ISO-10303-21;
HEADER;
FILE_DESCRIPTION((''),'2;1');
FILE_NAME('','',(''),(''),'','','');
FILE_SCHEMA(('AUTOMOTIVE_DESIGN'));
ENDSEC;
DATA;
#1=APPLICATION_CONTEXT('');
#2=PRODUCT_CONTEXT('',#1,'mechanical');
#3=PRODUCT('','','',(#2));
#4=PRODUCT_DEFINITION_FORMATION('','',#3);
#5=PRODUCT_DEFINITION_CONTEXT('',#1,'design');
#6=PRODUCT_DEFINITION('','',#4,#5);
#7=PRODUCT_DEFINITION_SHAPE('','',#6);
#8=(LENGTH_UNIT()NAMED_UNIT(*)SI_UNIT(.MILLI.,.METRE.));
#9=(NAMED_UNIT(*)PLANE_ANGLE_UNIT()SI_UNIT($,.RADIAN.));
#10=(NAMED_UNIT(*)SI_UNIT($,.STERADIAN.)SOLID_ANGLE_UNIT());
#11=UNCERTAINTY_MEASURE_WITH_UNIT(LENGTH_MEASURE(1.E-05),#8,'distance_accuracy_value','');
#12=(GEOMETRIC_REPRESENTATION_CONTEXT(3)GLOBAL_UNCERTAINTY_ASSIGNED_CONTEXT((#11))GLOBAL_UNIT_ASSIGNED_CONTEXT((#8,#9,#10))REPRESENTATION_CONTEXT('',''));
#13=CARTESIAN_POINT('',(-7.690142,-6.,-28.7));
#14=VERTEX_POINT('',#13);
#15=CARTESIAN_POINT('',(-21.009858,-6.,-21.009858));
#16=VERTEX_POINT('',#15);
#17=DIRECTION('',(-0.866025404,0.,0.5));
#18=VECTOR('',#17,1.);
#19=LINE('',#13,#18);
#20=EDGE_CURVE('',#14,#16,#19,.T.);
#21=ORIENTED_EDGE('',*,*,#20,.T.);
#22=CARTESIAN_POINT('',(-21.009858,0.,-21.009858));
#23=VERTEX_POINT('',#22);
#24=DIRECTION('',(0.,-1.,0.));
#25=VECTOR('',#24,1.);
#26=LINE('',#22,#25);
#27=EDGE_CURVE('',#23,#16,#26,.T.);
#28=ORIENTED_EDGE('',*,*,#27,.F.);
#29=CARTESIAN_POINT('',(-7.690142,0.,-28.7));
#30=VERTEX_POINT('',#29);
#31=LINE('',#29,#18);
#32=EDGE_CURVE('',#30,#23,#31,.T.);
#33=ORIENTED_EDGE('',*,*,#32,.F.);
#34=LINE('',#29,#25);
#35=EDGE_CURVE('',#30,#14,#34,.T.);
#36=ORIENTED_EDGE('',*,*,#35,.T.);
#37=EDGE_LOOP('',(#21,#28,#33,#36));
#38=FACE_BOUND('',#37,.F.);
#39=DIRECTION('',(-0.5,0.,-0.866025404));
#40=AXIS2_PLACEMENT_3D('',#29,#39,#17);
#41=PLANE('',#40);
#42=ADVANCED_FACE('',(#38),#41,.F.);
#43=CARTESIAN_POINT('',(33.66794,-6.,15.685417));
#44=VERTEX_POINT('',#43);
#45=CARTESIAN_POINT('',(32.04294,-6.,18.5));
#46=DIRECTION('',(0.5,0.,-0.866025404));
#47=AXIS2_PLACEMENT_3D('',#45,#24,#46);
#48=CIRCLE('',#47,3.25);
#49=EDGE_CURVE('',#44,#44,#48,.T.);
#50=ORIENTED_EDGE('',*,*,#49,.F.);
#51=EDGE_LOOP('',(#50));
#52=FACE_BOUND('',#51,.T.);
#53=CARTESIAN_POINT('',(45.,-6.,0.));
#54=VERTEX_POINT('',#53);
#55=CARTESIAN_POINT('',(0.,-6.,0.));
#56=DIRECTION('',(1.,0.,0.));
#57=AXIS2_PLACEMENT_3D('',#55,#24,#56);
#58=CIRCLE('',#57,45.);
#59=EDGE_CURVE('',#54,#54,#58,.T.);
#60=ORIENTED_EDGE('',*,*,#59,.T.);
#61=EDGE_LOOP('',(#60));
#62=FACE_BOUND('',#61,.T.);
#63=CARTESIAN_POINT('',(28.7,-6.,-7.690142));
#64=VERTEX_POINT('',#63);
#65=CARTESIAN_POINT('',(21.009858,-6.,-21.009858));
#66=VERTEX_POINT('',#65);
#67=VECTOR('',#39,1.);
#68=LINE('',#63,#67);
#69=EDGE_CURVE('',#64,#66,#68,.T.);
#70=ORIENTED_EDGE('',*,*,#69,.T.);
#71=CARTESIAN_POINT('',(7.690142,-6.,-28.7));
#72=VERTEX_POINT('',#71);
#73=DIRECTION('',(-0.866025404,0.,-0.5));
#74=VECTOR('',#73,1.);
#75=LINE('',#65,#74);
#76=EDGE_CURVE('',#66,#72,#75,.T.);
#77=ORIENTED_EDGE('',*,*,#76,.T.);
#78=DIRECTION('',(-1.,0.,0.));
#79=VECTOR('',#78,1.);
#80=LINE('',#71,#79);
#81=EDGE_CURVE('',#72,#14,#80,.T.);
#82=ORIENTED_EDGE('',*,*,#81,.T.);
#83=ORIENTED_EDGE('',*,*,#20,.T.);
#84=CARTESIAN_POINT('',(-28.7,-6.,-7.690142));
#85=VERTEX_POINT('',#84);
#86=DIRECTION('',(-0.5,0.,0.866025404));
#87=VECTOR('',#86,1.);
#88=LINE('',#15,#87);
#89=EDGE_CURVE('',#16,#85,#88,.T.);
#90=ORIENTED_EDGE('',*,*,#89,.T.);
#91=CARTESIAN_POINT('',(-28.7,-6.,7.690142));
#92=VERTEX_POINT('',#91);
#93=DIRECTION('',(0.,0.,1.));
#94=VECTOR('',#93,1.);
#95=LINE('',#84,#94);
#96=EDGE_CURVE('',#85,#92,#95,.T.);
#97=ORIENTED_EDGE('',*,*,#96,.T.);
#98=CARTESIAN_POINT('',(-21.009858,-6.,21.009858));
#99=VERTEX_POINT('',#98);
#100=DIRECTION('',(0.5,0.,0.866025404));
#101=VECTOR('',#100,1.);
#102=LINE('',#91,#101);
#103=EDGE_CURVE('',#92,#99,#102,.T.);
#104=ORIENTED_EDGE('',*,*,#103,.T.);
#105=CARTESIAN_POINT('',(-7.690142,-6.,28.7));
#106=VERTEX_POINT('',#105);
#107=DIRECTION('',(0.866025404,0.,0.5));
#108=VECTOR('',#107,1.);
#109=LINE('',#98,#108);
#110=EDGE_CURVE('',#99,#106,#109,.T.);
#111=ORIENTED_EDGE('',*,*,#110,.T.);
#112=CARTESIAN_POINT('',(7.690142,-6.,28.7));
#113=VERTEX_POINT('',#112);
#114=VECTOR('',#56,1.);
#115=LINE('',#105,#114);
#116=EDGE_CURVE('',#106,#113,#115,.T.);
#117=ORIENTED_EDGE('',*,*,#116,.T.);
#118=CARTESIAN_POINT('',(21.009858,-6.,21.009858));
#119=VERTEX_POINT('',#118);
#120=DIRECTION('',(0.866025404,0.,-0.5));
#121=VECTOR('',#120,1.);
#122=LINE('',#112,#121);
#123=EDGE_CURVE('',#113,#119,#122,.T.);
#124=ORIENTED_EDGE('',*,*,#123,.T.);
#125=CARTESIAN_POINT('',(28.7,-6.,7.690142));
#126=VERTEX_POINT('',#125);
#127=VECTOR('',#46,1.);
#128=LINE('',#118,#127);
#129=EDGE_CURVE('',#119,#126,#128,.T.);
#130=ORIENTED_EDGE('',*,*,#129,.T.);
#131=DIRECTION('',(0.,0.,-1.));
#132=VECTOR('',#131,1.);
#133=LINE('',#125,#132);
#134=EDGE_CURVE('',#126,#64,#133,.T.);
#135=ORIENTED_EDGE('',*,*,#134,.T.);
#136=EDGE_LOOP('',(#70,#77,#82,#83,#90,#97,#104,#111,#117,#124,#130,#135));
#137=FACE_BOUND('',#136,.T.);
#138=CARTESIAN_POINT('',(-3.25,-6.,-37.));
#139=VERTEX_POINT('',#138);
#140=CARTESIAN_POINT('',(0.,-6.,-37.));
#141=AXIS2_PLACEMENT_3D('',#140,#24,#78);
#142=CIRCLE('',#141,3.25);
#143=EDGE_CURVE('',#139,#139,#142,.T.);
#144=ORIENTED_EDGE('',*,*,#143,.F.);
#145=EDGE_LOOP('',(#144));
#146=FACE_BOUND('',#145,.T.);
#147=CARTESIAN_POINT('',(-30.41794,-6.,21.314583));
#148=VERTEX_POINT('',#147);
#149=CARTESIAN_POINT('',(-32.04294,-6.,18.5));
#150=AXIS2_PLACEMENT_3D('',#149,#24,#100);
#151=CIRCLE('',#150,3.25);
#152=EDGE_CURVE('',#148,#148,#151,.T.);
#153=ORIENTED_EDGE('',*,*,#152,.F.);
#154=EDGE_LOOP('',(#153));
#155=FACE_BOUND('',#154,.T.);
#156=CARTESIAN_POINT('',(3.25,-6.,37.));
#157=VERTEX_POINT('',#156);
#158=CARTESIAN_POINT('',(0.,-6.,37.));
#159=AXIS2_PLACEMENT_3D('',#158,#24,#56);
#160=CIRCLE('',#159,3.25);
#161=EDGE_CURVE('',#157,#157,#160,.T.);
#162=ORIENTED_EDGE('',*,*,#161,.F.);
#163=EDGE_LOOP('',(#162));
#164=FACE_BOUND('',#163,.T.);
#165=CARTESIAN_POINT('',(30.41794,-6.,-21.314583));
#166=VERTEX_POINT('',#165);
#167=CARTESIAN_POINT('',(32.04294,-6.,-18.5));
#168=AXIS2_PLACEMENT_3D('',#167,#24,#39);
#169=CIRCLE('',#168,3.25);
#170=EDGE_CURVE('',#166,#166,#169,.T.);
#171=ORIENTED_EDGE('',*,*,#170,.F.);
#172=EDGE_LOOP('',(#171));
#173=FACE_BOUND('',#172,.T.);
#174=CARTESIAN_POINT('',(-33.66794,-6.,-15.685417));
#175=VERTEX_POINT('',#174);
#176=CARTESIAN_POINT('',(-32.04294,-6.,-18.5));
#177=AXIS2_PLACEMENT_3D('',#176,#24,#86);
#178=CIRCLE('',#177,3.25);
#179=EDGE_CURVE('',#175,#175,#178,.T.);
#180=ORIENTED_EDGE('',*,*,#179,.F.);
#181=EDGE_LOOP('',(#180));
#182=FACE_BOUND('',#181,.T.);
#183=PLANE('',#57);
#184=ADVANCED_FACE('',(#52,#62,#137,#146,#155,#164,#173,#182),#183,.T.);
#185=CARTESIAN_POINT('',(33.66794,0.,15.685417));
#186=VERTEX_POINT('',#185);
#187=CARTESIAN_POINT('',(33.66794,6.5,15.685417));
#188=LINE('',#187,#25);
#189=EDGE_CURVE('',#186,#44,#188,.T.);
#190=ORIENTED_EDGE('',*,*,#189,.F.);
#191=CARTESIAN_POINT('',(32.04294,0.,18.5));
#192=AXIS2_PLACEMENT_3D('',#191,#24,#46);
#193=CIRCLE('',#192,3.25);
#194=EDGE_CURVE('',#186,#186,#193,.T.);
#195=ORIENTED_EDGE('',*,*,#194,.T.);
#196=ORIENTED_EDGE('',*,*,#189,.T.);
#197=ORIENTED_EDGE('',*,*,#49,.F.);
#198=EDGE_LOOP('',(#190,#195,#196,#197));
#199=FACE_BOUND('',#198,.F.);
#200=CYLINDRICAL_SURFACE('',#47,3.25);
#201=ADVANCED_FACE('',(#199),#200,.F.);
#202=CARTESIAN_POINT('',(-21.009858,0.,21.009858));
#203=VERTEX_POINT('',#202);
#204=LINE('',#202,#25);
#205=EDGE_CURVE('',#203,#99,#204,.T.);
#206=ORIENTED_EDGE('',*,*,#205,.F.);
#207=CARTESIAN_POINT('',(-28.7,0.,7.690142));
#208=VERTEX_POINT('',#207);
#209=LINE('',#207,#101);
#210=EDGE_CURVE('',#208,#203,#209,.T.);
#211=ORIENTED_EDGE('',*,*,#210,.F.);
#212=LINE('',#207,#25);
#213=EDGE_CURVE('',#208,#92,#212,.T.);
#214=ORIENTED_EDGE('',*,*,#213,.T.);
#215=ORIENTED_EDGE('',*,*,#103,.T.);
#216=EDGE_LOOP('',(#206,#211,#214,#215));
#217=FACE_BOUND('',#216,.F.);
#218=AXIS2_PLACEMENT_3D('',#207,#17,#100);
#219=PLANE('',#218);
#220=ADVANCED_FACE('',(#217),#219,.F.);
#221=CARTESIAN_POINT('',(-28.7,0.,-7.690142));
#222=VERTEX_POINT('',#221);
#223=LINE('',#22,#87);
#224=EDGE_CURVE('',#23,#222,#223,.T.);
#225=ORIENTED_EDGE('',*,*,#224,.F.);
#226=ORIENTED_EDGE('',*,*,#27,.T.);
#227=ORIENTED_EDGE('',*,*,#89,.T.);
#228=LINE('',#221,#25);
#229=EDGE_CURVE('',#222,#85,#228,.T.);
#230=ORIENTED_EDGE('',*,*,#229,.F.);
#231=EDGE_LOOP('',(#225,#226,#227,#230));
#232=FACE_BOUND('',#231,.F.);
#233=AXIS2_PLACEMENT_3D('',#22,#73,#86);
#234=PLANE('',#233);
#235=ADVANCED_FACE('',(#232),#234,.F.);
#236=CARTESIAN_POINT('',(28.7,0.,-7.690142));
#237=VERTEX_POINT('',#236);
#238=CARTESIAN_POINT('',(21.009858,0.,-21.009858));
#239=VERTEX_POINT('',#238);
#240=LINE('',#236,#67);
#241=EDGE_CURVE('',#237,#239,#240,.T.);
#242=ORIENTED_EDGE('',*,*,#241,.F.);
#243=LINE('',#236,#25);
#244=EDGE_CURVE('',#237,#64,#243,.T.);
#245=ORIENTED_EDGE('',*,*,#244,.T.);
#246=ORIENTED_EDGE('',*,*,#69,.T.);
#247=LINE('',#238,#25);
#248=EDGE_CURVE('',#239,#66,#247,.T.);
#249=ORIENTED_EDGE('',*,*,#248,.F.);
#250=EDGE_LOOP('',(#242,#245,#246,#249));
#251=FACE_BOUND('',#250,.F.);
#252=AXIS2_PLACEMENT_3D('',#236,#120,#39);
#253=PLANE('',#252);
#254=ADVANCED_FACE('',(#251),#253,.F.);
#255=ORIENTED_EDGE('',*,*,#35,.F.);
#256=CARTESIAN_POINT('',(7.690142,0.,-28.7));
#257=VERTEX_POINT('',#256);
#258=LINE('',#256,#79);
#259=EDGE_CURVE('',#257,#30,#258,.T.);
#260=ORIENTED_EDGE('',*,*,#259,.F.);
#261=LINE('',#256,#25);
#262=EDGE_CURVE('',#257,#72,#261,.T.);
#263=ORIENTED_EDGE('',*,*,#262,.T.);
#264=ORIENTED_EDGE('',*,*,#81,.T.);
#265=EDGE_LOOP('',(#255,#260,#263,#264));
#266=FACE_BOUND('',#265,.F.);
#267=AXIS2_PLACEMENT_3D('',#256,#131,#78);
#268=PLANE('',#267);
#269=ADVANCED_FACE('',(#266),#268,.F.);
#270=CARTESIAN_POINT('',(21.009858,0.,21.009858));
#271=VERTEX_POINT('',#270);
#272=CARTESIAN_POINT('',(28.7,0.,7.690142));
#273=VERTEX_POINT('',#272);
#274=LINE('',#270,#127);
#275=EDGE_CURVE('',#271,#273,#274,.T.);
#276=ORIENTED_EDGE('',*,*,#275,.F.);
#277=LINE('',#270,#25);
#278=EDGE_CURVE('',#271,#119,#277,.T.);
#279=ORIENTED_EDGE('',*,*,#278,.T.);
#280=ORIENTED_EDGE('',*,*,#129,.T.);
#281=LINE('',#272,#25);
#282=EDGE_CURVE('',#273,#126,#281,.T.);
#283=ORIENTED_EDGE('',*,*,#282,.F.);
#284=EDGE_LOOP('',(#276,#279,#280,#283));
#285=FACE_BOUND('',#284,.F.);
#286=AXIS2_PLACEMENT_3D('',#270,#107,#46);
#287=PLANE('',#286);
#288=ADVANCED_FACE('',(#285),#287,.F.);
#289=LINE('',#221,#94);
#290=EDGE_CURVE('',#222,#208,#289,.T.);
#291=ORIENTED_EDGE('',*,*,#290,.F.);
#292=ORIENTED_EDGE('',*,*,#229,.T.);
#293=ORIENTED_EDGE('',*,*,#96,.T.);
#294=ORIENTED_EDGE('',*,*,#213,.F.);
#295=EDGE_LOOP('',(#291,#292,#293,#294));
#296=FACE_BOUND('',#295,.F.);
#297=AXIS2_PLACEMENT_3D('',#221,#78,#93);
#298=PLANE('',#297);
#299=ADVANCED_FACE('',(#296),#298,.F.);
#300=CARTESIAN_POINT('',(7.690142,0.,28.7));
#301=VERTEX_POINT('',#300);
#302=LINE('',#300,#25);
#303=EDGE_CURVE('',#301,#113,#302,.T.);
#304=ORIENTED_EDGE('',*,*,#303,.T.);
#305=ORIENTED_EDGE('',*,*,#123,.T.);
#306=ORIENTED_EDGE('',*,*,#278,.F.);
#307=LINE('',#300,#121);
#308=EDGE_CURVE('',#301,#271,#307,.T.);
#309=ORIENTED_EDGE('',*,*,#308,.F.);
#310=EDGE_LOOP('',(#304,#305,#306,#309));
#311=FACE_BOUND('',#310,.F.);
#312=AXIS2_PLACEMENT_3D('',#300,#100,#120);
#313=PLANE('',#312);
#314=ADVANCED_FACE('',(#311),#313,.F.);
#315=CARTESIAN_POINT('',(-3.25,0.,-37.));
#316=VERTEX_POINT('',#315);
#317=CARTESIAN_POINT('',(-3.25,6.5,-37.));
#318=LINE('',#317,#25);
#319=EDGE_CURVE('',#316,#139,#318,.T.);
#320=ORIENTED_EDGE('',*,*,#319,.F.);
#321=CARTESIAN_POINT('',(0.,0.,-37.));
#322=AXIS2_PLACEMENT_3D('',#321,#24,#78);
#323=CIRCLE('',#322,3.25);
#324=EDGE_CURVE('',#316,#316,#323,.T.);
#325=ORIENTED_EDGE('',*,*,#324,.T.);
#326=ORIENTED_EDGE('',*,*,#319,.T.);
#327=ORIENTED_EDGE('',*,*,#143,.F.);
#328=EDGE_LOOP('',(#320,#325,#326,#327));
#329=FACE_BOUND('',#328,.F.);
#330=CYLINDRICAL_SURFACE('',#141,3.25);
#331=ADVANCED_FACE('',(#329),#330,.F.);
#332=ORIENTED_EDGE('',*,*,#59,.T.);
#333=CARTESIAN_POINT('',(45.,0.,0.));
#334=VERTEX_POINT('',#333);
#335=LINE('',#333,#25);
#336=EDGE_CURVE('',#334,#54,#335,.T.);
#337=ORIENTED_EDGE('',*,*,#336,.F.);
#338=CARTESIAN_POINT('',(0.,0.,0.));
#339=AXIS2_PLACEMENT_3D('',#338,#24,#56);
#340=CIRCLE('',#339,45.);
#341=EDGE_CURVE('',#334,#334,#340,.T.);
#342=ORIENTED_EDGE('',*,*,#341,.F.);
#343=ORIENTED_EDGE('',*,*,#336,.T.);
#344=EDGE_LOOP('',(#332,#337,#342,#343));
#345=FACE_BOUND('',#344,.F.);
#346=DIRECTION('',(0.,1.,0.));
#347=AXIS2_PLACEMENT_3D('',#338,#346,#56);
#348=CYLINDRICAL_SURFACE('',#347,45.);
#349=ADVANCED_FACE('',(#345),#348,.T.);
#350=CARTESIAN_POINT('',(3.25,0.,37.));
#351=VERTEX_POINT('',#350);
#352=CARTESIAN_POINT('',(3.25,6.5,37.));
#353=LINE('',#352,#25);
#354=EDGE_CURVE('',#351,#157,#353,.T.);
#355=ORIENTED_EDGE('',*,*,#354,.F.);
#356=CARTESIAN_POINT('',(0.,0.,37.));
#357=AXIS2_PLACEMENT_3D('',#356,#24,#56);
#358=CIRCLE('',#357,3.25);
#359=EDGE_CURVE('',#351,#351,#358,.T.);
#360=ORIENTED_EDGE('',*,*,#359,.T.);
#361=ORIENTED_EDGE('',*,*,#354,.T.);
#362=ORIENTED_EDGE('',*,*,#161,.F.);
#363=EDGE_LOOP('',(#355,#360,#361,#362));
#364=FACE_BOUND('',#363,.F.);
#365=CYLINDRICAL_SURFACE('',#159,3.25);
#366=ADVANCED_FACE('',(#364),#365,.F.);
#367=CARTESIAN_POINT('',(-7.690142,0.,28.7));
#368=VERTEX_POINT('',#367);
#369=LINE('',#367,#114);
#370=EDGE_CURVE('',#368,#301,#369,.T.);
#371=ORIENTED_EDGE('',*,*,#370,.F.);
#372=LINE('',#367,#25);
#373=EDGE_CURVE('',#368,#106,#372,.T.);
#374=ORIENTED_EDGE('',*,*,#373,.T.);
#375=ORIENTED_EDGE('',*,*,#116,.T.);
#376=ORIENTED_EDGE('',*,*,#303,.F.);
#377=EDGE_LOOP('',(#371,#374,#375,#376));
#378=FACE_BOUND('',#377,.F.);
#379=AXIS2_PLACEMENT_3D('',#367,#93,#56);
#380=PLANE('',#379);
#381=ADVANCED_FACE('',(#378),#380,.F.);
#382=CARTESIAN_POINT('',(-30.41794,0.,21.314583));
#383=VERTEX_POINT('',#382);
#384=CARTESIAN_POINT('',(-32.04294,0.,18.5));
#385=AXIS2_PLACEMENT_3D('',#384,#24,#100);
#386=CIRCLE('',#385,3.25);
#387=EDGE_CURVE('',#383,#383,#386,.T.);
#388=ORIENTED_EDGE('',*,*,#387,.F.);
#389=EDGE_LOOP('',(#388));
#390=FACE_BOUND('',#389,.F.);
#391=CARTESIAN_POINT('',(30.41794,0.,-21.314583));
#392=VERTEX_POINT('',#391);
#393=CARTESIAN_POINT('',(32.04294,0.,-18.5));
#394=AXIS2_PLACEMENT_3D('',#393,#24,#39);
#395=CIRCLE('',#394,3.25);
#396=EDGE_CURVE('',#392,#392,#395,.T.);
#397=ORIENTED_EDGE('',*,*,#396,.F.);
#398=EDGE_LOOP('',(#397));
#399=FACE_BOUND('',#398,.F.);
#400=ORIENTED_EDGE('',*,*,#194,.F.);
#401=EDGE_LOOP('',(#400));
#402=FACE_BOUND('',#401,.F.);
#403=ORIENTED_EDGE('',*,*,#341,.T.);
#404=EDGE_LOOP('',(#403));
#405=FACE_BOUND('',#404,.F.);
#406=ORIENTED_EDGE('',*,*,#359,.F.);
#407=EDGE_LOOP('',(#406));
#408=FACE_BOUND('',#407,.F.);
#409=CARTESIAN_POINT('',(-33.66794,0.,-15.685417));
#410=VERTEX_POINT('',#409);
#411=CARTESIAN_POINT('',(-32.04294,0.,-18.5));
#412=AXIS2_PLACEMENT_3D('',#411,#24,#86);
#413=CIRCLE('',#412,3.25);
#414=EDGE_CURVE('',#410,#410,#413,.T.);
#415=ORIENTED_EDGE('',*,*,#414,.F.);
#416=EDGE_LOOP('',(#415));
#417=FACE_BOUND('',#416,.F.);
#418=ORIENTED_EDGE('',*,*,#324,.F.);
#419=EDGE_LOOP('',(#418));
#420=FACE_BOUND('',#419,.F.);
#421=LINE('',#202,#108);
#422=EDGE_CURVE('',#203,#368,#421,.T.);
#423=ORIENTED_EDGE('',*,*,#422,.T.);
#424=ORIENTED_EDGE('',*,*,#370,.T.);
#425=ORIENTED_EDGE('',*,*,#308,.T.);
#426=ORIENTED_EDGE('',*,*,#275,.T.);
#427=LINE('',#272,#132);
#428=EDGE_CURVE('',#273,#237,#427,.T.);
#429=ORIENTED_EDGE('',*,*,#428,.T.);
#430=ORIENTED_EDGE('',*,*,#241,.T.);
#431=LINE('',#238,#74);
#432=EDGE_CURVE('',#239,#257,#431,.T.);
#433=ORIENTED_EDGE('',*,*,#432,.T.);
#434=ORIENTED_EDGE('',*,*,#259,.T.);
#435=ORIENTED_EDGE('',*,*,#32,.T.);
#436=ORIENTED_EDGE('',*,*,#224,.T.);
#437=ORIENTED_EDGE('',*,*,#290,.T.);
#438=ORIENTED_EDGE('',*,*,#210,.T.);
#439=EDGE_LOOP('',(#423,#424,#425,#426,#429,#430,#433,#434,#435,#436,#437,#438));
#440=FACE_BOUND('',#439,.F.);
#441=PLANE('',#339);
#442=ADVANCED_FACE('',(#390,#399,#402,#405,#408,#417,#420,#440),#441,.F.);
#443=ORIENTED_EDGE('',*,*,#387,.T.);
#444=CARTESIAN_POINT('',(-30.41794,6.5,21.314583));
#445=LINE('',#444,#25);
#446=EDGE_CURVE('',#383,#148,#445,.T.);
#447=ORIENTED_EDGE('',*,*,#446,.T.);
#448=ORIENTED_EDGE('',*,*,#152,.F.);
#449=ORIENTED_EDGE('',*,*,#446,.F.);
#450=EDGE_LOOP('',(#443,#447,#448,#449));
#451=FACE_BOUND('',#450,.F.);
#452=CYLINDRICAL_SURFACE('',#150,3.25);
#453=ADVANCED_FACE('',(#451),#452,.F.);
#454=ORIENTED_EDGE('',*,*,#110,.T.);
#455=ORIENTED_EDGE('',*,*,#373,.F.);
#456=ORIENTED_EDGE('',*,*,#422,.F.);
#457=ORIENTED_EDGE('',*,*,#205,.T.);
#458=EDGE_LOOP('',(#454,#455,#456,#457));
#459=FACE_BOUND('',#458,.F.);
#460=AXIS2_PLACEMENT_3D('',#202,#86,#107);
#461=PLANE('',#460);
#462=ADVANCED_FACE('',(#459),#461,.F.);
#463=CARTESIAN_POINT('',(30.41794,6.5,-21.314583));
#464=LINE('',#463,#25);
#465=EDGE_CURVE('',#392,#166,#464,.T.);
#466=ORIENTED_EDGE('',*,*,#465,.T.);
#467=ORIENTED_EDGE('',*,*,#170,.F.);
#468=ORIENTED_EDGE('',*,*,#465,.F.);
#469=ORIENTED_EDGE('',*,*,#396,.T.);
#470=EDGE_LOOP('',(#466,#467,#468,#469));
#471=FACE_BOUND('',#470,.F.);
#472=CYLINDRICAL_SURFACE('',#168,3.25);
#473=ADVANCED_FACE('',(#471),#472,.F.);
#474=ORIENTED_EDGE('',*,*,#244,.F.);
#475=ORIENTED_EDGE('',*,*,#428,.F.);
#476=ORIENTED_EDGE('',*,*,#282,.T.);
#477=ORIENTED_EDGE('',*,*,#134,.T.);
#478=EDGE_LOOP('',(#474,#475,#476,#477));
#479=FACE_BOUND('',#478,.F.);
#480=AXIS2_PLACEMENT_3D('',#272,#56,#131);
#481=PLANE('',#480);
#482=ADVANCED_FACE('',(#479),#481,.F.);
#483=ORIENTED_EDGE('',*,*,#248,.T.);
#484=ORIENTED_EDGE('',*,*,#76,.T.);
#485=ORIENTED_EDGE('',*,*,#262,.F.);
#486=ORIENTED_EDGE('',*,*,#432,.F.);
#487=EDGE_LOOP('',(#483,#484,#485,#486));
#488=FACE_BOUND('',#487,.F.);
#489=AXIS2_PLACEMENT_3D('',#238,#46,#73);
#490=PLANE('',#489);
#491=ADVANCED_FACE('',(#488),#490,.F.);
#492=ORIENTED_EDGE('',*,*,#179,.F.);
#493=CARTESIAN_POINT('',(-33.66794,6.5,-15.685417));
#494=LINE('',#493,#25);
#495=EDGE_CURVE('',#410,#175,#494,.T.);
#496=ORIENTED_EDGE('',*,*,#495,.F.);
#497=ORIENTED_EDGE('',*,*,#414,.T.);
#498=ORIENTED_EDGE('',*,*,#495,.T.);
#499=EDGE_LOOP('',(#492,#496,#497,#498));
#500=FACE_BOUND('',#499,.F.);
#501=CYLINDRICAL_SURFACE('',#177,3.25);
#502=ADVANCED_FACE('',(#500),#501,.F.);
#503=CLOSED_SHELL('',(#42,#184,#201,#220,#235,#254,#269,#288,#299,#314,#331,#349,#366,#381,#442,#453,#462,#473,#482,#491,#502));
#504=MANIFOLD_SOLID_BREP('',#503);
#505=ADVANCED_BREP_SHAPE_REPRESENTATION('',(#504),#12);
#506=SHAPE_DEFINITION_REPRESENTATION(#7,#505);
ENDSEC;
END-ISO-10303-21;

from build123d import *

# Parameters (mm, degrees)
F0_R            = 45
F1_DEPTH        = 6
F2_R            = 3.25
F3_DEPTH        = 12.5
F3_COPIES_COUNT = 6


# Not quite as in the source:
# - a pattern or mirror of a feature is missing from the dataset's text; its kind, count and spacing are read off the source's solid


with BuildPart() as f1:
    # F0 (on Front) → F1 (new body)
    with BuildSketch(Plane.XZ):
        Circle(F0_R)
        Polygon((-21.0098581772, 21.0098581772), (-7.6901418228, 28.7), (7.6901418228, 28.7), (21.0098581772, 21.0098581772), (28.7, 7.6901418228), (28.7, -7.6901418228), (21.0098581772, -21.0098581772), (7.6901418228, -28.7), (-7.6901418228, -28.7), (-21.0098581772, -21.0098581772), (-28.7, -7.6901418228), (-28.7, 7.6901418228), align=None, mode=Mode.SUBTRACT)
    extrude(amount=F1_DEPTH)

    # F2 (on face) → F3 (cut, symmetric)
    with BuildSketch(Plane.XZ.offset(6)):
        with Locations((0, 37)):
            Circle(F2_R)
    f3 = extrude(amount=F3_DEPTH, both=True, mode=Mode.SUBTRACT)

    # F3_copies: F3 ×6 about axis
    f3_copies_axis = Axis((0, 0, 0), (0, 1, 0))
    for i in range(1, F3_COPIES_COUNT):
        add(f3.rotate(f3_copies_axis, i * 360 / F3_COPIES_COUNT), mode=Mode.SUBTRACT)


solid = f1.part
